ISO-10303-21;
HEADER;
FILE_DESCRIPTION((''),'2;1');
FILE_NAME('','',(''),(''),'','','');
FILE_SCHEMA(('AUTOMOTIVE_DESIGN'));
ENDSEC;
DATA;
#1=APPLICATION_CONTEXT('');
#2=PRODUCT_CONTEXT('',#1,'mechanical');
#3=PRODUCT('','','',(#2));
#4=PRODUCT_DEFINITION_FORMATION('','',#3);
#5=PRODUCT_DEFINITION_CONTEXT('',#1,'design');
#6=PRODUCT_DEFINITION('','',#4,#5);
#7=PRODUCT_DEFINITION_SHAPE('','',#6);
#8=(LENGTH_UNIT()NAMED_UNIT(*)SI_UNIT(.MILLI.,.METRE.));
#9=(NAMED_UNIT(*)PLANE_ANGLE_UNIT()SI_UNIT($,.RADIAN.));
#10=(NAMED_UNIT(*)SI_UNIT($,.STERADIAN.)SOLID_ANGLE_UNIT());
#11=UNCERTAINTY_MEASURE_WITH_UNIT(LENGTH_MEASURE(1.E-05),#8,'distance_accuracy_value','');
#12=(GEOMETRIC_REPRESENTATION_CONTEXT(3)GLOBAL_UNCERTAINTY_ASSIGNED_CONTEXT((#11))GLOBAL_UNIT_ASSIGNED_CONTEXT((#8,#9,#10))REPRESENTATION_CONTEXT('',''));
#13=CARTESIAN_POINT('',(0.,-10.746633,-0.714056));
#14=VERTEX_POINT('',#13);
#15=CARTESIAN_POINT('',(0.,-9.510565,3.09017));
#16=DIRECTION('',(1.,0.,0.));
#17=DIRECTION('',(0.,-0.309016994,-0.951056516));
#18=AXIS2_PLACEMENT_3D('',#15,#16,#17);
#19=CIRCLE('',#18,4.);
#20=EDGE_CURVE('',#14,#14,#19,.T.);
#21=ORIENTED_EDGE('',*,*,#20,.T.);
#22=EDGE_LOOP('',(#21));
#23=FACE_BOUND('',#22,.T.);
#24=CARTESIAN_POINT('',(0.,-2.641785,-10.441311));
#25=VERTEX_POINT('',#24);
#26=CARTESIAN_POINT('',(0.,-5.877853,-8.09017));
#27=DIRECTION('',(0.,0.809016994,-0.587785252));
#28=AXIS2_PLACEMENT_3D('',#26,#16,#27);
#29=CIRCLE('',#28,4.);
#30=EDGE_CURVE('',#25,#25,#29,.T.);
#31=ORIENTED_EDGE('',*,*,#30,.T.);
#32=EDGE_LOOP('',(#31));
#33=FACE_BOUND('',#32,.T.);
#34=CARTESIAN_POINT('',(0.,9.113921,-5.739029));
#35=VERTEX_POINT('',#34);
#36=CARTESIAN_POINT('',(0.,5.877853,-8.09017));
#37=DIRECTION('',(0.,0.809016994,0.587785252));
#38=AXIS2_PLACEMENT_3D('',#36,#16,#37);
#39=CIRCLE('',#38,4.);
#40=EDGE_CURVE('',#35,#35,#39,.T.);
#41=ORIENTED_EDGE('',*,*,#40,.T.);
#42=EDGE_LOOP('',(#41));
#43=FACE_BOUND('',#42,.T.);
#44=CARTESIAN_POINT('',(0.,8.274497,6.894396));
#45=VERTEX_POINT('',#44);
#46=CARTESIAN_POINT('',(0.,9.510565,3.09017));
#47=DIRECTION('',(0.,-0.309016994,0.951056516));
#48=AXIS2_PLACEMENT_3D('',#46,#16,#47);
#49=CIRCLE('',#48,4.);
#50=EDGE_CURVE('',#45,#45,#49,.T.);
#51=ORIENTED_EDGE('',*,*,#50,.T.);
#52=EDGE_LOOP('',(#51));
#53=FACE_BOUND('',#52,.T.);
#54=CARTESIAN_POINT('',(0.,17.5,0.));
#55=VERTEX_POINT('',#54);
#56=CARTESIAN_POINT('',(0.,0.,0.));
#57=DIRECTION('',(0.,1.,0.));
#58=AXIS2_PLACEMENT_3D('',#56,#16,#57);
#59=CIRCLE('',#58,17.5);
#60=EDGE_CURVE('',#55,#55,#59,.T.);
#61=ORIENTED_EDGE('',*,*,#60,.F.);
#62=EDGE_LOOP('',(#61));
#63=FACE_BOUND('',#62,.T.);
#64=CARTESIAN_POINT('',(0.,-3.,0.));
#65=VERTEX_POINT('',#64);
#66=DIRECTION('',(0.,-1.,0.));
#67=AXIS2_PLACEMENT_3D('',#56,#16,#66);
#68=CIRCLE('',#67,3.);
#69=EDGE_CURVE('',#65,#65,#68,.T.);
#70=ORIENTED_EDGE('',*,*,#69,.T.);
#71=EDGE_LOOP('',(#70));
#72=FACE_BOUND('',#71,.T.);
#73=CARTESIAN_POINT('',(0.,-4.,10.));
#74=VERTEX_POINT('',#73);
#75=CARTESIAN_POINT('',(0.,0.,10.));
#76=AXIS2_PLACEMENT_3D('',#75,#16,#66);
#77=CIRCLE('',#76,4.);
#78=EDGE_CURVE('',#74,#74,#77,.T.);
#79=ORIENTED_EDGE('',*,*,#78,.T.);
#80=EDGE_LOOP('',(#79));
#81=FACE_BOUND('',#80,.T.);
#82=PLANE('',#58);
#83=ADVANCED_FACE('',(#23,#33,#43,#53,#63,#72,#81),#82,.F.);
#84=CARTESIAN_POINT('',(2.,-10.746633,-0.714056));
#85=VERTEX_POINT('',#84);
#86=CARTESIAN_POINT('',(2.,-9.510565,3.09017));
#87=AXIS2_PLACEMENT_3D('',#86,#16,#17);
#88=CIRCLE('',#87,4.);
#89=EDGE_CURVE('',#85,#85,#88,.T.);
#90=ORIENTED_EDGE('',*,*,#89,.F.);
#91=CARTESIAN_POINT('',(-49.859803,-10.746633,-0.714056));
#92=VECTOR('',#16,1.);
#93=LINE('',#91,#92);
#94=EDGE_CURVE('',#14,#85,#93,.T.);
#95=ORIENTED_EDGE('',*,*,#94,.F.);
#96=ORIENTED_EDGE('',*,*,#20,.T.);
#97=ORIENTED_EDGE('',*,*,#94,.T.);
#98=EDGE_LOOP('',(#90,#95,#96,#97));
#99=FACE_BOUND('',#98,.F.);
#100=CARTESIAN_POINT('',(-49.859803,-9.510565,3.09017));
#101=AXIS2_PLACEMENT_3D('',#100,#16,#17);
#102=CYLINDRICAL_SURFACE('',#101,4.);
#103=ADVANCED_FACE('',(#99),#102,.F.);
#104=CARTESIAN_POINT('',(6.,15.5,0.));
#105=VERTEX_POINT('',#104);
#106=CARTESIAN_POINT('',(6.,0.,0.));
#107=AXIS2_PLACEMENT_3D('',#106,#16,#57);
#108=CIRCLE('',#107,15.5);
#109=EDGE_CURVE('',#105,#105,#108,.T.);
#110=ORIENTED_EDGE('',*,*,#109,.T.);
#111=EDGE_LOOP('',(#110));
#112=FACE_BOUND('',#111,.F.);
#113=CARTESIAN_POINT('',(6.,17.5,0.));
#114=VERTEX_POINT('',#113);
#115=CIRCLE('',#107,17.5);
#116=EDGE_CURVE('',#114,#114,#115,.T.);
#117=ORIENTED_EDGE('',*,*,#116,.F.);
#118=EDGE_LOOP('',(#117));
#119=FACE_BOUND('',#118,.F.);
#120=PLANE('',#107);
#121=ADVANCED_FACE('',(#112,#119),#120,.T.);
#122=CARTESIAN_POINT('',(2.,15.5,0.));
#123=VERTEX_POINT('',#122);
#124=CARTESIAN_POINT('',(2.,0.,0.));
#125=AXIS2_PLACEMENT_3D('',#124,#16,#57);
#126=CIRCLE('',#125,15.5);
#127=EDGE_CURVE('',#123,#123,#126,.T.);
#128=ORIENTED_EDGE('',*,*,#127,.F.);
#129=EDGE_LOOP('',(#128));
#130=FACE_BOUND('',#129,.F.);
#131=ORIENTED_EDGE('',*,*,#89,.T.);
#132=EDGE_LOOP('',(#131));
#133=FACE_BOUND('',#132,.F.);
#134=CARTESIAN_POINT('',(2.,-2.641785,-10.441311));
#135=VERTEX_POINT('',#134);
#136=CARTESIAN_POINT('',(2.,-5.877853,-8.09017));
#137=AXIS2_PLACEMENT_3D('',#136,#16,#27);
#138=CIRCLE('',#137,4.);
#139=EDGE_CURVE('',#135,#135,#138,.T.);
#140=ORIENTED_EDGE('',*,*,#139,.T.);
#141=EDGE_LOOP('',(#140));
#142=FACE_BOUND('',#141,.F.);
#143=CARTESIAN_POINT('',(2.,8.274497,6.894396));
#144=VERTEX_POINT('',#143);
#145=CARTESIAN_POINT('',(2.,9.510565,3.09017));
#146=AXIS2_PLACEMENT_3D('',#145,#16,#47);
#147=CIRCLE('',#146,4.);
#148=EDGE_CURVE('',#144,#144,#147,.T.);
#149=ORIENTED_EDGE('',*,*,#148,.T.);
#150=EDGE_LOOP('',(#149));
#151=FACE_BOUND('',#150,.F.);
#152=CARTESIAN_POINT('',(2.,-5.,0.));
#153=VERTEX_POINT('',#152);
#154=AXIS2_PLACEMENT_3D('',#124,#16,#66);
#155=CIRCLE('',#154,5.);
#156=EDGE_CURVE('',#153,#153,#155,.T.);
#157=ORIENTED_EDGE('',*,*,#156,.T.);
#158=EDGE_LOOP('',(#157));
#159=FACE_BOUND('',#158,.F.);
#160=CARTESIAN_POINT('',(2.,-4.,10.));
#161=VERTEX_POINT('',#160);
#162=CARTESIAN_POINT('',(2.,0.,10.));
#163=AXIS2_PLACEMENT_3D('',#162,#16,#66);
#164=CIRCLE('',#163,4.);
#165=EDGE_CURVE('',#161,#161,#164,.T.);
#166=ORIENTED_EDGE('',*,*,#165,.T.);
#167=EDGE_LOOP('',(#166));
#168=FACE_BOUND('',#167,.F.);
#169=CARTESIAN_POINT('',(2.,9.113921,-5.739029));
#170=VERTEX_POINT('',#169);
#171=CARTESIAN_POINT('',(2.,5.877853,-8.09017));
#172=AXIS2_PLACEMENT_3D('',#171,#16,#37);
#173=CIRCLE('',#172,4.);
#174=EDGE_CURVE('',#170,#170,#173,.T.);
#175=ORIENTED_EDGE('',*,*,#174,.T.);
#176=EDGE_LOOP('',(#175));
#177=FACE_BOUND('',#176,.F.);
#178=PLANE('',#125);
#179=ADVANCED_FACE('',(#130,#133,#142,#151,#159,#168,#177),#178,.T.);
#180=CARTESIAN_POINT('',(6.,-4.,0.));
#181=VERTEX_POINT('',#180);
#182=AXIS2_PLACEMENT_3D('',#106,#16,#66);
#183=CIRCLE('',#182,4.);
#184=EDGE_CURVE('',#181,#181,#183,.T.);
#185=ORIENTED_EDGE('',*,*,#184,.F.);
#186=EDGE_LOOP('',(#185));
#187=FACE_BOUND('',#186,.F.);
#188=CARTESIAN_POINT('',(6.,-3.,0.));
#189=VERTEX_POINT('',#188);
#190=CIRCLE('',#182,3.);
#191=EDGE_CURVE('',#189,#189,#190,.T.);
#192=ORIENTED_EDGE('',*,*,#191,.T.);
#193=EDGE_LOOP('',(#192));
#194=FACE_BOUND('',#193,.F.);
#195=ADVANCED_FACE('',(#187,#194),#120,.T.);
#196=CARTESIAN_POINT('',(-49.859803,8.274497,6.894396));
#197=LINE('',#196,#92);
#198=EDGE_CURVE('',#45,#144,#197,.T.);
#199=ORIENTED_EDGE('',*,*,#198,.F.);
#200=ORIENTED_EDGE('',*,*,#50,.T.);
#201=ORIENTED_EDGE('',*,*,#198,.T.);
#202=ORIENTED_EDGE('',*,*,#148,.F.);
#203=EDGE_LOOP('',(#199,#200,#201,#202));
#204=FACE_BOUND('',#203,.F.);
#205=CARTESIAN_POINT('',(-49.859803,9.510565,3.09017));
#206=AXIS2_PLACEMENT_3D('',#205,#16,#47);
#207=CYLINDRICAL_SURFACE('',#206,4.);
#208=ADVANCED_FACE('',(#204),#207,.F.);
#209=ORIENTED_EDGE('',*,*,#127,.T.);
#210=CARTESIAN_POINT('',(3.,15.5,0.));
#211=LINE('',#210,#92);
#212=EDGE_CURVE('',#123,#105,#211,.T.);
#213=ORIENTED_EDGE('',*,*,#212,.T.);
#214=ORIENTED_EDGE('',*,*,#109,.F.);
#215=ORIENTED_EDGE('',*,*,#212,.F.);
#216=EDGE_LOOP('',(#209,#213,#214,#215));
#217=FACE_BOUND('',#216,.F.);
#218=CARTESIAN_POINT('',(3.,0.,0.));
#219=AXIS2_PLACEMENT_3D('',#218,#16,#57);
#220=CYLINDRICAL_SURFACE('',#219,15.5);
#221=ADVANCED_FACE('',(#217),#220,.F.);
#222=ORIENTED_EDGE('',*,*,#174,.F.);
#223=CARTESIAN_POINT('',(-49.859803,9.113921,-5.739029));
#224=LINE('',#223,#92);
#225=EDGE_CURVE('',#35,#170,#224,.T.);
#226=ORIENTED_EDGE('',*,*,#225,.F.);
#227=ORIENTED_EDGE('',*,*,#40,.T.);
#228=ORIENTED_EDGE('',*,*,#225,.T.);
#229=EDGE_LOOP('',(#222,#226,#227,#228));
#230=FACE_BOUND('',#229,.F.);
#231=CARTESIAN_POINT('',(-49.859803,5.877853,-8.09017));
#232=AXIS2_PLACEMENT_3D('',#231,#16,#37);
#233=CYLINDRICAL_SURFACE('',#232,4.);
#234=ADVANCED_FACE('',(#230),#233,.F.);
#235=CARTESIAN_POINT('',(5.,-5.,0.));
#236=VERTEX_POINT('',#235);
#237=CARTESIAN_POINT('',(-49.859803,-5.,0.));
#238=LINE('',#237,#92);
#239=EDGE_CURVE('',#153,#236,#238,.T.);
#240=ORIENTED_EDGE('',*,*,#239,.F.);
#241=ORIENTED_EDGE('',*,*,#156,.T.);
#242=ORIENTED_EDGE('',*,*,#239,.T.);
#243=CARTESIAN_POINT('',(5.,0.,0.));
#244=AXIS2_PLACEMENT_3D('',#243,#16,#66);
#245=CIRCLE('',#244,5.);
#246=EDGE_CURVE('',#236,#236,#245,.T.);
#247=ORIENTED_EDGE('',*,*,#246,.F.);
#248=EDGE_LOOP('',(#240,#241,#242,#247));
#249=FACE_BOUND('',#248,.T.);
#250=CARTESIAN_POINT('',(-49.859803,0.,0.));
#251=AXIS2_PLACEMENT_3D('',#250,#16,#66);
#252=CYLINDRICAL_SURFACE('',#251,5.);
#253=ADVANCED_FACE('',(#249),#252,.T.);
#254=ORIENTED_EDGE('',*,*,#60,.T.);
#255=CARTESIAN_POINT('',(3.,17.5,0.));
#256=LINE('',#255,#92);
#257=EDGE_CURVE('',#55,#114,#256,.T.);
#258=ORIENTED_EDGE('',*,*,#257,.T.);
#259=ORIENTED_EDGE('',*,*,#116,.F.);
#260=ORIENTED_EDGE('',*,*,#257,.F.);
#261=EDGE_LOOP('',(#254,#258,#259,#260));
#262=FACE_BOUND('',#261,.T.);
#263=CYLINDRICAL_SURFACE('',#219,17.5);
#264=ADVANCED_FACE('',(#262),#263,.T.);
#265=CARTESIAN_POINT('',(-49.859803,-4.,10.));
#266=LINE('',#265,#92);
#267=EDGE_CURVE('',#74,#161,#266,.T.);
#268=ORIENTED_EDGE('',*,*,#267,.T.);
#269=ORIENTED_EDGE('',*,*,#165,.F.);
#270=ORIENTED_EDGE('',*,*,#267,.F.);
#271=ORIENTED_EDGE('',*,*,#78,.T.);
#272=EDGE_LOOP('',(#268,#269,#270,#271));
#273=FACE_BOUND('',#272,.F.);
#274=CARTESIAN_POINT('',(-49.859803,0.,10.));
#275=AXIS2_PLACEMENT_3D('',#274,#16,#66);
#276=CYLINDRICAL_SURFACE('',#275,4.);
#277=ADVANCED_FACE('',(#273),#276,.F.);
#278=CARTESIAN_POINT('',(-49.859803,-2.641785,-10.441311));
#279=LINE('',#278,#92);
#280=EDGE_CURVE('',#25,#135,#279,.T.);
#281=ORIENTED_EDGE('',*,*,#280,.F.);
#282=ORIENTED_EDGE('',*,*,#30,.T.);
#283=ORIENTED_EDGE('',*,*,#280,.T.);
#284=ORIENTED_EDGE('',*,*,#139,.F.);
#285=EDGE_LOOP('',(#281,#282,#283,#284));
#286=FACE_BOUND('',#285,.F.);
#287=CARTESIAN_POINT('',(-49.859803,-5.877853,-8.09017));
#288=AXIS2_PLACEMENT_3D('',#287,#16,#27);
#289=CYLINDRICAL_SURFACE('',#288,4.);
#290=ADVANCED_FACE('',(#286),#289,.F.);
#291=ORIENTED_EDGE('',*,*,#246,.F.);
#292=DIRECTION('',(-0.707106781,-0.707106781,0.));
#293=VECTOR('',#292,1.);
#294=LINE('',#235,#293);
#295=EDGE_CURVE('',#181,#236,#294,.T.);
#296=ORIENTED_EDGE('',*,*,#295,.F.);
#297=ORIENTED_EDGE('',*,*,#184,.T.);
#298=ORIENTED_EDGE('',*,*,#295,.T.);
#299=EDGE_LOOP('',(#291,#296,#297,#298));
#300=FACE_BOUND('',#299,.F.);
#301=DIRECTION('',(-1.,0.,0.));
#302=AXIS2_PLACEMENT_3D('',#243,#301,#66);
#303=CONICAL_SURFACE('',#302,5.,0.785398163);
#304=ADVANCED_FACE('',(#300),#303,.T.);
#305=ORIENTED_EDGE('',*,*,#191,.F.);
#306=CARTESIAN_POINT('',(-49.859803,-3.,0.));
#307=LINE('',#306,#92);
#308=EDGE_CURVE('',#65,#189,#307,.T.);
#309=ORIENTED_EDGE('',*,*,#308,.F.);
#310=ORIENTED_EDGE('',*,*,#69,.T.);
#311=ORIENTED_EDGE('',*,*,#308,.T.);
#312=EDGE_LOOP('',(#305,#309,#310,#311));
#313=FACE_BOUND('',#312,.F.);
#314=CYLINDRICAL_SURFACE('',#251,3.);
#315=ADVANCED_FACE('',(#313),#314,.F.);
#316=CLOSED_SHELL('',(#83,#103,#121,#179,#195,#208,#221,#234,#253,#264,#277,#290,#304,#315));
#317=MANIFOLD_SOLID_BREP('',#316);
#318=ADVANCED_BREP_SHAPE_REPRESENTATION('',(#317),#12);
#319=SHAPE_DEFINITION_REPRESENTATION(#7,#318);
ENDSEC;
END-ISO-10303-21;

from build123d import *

# Parameters (mm, degrees)
F0_W            = 6
F0_H            = 17.5
F3_D            = 6
F4_T            = -2
F6_D            = 8
F6_COPIES_COUNT = 5
F7_SIZE         = 1


# Not quite as in the source:
# - a pattern or mirror of a feature is missing from the dataset's text; its kind, count and spacing are read off the source's solid


with BuildPart() as f1:
    # F0 (on Top) → F1 (revolve)
    with BuildSketch(Plane.XY):
        with Locations((3, 8.75)):
            Rectangle(F0_W, F0_H)
    revolve(axis=Axis((3, 0, 0), (1, 0, 0)))

    # F3 (through all)
    with Locations(Plane(origin=(0, 0, 0), x_dir=(0, 1, 0), z_dir=(-1, 0, 0))):
        with Locations((0, 0)):
            Hole(F3_D / 2)

    # F4
    f4_openings = [f1.faces().sort_by_distance(p)[0] for p in [
        (6, -17.005025, 0),
    ]]
    offset(amount=F4_T, openings=f4_openings)

    # F6 (through all)
    with Locations(Plane(origin=(0, 0, 0), x_dir=(0, 1, 0), z_dir=(-1, 0, 0))):
        with Locations((0, -10)):
            f6 = Hole(F6_D / 2)

    # F6_copies: F6 ×5 about axis
    f6_copies_axis = Axis((0, 0, 0), (1, 0, 0))
    for i in range(1, F6_COPIES_COUNT):
        add(f6.rotate(f6_copies_axis, i * 360 / F6_COPIES_COUNT), mode=Mode.SUBTRACT)

    # F7
    f7_edges = [f1.edges().sort_by_distance(p)[0] for p in [
        (6, -5, 0),
    ]]
    chamfer(f7_edges, length=F7_SIZE)


solid = f1.part
